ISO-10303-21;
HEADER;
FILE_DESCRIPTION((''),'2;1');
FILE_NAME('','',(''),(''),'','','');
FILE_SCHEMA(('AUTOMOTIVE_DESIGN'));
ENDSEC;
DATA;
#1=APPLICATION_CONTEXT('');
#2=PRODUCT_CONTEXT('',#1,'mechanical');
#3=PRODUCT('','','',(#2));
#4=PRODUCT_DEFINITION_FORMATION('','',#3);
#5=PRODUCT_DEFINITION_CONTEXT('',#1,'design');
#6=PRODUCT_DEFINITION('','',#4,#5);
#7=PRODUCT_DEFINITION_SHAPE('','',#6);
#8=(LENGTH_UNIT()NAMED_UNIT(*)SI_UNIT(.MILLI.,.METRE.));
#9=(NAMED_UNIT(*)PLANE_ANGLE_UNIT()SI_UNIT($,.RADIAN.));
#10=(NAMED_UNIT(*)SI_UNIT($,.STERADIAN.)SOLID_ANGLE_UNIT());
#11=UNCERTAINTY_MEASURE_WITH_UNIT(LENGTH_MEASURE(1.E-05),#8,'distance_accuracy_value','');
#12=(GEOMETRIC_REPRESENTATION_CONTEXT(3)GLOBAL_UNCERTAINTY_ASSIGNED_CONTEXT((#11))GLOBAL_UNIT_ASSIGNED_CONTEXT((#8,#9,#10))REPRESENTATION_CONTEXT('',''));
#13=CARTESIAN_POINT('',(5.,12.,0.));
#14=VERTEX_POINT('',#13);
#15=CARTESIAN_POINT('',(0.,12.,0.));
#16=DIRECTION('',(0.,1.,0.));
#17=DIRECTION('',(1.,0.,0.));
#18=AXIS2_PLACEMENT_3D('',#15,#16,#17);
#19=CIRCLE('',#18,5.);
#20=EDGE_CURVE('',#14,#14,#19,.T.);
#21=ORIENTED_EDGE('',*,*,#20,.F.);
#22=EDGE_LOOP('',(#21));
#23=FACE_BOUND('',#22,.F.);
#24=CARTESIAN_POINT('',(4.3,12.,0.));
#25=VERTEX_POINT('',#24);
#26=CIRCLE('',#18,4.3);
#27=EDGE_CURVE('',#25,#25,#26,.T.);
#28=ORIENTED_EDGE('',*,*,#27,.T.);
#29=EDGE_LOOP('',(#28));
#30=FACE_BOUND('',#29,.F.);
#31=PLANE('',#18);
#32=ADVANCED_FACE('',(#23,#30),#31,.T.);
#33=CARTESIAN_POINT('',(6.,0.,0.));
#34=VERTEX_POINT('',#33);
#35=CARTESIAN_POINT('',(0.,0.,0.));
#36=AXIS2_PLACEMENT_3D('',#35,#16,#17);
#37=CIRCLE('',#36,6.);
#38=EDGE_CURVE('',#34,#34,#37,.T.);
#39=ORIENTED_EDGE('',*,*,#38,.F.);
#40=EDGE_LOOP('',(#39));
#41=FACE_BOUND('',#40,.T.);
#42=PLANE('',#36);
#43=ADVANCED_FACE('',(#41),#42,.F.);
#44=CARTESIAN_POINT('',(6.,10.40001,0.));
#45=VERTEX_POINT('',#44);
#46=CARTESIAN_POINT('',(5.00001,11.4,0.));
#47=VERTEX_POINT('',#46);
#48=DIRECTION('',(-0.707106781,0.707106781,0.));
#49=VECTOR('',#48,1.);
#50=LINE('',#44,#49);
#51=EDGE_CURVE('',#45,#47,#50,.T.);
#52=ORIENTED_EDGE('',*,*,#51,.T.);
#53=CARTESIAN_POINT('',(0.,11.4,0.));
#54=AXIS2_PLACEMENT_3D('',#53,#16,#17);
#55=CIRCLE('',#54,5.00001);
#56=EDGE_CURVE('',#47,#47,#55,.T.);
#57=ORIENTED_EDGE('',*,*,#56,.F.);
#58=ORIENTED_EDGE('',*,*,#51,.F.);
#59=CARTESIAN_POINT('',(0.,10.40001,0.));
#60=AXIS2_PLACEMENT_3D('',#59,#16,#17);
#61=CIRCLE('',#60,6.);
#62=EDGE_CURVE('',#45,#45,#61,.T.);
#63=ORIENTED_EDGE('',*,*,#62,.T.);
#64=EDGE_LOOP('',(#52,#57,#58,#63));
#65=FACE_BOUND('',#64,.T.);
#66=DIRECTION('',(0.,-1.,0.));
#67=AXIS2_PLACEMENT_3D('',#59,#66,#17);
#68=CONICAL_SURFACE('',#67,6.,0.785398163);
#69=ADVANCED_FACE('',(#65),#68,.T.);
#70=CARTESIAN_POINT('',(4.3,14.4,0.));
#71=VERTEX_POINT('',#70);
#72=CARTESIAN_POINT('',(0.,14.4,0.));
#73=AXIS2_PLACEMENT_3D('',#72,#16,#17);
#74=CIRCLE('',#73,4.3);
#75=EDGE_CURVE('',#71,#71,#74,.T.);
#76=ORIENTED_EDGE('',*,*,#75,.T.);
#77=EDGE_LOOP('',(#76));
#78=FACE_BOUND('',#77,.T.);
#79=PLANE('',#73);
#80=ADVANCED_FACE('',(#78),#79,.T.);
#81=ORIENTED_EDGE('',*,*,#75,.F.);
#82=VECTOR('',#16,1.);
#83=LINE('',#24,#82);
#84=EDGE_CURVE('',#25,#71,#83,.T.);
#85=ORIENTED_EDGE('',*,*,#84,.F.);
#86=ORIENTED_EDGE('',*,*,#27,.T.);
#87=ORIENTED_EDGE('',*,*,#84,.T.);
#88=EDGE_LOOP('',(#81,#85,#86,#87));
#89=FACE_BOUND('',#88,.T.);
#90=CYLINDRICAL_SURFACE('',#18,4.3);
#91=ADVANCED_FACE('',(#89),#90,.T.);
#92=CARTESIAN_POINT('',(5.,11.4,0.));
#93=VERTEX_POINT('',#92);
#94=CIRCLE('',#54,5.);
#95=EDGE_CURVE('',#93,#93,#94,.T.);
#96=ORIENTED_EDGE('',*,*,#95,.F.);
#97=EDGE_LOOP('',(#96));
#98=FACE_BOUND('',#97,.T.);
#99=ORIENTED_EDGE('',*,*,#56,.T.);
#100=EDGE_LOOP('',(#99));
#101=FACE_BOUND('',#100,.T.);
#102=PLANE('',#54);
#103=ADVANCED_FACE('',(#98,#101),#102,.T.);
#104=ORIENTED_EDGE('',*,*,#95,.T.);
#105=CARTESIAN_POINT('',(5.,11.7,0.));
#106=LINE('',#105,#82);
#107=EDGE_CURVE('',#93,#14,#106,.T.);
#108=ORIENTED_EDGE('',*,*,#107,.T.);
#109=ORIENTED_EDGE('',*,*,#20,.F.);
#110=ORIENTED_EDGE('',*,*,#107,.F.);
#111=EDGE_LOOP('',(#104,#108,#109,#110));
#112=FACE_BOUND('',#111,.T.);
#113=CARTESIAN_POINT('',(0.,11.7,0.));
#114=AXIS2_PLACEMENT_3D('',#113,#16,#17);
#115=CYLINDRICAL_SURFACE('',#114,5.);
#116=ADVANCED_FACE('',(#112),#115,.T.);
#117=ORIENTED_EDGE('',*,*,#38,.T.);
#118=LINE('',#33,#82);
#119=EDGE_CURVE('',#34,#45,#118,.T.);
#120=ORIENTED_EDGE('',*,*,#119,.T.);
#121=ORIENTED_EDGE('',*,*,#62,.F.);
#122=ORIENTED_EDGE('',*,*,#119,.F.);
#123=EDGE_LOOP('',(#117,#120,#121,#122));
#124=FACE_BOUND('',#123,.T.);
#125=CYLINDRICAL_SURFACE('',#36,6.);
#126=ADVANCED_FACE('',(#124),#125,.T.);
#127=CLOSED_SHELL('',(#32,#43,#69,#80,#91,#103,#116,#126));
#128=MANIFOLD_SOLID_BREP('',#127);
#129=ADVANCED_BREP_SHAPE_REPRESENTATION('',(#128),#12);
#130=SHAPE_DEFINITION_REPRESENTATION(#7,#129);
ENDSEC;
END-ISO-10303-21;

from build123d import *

# Parameters (mm, degrees)
F0_W    = 0.7
F0_H    = 0.6
F2_SIZE = 0.99999


# Not quite as in the source:
# - a fillet or chamfer is up to 0.001 mm smaller than in the source, because OpenCascade refuses the exact size


with BuildPart() as f1:
    # F0 (on Top) → F1 (revolve)
    with BuildSketch(Plane.XY):
        with Locations((4.65, 11.7)):
            Rectangle(F0_W, F0_H)
        Polygon((0, 14.4), (0, 0), (6, 0), (6, 11.4), (5, 11.4), (4.3, 11.4), (4.3, 12), (4.3, 14.4), align=None)
    revolve(axis=Axis((0, 7.2, 0), (0, 1, 0)))

    # F2 (size 1 in the source; OpenCascade refuses exactly that, so slightly less here)
    f2_edges = [f1.edges().sort_by_distance(p)[0] for p in [
        (-6, 11.4, 0),
    ]]
    chamfer(f2_edges, length=F2_SIZE)


solid = f1.part
